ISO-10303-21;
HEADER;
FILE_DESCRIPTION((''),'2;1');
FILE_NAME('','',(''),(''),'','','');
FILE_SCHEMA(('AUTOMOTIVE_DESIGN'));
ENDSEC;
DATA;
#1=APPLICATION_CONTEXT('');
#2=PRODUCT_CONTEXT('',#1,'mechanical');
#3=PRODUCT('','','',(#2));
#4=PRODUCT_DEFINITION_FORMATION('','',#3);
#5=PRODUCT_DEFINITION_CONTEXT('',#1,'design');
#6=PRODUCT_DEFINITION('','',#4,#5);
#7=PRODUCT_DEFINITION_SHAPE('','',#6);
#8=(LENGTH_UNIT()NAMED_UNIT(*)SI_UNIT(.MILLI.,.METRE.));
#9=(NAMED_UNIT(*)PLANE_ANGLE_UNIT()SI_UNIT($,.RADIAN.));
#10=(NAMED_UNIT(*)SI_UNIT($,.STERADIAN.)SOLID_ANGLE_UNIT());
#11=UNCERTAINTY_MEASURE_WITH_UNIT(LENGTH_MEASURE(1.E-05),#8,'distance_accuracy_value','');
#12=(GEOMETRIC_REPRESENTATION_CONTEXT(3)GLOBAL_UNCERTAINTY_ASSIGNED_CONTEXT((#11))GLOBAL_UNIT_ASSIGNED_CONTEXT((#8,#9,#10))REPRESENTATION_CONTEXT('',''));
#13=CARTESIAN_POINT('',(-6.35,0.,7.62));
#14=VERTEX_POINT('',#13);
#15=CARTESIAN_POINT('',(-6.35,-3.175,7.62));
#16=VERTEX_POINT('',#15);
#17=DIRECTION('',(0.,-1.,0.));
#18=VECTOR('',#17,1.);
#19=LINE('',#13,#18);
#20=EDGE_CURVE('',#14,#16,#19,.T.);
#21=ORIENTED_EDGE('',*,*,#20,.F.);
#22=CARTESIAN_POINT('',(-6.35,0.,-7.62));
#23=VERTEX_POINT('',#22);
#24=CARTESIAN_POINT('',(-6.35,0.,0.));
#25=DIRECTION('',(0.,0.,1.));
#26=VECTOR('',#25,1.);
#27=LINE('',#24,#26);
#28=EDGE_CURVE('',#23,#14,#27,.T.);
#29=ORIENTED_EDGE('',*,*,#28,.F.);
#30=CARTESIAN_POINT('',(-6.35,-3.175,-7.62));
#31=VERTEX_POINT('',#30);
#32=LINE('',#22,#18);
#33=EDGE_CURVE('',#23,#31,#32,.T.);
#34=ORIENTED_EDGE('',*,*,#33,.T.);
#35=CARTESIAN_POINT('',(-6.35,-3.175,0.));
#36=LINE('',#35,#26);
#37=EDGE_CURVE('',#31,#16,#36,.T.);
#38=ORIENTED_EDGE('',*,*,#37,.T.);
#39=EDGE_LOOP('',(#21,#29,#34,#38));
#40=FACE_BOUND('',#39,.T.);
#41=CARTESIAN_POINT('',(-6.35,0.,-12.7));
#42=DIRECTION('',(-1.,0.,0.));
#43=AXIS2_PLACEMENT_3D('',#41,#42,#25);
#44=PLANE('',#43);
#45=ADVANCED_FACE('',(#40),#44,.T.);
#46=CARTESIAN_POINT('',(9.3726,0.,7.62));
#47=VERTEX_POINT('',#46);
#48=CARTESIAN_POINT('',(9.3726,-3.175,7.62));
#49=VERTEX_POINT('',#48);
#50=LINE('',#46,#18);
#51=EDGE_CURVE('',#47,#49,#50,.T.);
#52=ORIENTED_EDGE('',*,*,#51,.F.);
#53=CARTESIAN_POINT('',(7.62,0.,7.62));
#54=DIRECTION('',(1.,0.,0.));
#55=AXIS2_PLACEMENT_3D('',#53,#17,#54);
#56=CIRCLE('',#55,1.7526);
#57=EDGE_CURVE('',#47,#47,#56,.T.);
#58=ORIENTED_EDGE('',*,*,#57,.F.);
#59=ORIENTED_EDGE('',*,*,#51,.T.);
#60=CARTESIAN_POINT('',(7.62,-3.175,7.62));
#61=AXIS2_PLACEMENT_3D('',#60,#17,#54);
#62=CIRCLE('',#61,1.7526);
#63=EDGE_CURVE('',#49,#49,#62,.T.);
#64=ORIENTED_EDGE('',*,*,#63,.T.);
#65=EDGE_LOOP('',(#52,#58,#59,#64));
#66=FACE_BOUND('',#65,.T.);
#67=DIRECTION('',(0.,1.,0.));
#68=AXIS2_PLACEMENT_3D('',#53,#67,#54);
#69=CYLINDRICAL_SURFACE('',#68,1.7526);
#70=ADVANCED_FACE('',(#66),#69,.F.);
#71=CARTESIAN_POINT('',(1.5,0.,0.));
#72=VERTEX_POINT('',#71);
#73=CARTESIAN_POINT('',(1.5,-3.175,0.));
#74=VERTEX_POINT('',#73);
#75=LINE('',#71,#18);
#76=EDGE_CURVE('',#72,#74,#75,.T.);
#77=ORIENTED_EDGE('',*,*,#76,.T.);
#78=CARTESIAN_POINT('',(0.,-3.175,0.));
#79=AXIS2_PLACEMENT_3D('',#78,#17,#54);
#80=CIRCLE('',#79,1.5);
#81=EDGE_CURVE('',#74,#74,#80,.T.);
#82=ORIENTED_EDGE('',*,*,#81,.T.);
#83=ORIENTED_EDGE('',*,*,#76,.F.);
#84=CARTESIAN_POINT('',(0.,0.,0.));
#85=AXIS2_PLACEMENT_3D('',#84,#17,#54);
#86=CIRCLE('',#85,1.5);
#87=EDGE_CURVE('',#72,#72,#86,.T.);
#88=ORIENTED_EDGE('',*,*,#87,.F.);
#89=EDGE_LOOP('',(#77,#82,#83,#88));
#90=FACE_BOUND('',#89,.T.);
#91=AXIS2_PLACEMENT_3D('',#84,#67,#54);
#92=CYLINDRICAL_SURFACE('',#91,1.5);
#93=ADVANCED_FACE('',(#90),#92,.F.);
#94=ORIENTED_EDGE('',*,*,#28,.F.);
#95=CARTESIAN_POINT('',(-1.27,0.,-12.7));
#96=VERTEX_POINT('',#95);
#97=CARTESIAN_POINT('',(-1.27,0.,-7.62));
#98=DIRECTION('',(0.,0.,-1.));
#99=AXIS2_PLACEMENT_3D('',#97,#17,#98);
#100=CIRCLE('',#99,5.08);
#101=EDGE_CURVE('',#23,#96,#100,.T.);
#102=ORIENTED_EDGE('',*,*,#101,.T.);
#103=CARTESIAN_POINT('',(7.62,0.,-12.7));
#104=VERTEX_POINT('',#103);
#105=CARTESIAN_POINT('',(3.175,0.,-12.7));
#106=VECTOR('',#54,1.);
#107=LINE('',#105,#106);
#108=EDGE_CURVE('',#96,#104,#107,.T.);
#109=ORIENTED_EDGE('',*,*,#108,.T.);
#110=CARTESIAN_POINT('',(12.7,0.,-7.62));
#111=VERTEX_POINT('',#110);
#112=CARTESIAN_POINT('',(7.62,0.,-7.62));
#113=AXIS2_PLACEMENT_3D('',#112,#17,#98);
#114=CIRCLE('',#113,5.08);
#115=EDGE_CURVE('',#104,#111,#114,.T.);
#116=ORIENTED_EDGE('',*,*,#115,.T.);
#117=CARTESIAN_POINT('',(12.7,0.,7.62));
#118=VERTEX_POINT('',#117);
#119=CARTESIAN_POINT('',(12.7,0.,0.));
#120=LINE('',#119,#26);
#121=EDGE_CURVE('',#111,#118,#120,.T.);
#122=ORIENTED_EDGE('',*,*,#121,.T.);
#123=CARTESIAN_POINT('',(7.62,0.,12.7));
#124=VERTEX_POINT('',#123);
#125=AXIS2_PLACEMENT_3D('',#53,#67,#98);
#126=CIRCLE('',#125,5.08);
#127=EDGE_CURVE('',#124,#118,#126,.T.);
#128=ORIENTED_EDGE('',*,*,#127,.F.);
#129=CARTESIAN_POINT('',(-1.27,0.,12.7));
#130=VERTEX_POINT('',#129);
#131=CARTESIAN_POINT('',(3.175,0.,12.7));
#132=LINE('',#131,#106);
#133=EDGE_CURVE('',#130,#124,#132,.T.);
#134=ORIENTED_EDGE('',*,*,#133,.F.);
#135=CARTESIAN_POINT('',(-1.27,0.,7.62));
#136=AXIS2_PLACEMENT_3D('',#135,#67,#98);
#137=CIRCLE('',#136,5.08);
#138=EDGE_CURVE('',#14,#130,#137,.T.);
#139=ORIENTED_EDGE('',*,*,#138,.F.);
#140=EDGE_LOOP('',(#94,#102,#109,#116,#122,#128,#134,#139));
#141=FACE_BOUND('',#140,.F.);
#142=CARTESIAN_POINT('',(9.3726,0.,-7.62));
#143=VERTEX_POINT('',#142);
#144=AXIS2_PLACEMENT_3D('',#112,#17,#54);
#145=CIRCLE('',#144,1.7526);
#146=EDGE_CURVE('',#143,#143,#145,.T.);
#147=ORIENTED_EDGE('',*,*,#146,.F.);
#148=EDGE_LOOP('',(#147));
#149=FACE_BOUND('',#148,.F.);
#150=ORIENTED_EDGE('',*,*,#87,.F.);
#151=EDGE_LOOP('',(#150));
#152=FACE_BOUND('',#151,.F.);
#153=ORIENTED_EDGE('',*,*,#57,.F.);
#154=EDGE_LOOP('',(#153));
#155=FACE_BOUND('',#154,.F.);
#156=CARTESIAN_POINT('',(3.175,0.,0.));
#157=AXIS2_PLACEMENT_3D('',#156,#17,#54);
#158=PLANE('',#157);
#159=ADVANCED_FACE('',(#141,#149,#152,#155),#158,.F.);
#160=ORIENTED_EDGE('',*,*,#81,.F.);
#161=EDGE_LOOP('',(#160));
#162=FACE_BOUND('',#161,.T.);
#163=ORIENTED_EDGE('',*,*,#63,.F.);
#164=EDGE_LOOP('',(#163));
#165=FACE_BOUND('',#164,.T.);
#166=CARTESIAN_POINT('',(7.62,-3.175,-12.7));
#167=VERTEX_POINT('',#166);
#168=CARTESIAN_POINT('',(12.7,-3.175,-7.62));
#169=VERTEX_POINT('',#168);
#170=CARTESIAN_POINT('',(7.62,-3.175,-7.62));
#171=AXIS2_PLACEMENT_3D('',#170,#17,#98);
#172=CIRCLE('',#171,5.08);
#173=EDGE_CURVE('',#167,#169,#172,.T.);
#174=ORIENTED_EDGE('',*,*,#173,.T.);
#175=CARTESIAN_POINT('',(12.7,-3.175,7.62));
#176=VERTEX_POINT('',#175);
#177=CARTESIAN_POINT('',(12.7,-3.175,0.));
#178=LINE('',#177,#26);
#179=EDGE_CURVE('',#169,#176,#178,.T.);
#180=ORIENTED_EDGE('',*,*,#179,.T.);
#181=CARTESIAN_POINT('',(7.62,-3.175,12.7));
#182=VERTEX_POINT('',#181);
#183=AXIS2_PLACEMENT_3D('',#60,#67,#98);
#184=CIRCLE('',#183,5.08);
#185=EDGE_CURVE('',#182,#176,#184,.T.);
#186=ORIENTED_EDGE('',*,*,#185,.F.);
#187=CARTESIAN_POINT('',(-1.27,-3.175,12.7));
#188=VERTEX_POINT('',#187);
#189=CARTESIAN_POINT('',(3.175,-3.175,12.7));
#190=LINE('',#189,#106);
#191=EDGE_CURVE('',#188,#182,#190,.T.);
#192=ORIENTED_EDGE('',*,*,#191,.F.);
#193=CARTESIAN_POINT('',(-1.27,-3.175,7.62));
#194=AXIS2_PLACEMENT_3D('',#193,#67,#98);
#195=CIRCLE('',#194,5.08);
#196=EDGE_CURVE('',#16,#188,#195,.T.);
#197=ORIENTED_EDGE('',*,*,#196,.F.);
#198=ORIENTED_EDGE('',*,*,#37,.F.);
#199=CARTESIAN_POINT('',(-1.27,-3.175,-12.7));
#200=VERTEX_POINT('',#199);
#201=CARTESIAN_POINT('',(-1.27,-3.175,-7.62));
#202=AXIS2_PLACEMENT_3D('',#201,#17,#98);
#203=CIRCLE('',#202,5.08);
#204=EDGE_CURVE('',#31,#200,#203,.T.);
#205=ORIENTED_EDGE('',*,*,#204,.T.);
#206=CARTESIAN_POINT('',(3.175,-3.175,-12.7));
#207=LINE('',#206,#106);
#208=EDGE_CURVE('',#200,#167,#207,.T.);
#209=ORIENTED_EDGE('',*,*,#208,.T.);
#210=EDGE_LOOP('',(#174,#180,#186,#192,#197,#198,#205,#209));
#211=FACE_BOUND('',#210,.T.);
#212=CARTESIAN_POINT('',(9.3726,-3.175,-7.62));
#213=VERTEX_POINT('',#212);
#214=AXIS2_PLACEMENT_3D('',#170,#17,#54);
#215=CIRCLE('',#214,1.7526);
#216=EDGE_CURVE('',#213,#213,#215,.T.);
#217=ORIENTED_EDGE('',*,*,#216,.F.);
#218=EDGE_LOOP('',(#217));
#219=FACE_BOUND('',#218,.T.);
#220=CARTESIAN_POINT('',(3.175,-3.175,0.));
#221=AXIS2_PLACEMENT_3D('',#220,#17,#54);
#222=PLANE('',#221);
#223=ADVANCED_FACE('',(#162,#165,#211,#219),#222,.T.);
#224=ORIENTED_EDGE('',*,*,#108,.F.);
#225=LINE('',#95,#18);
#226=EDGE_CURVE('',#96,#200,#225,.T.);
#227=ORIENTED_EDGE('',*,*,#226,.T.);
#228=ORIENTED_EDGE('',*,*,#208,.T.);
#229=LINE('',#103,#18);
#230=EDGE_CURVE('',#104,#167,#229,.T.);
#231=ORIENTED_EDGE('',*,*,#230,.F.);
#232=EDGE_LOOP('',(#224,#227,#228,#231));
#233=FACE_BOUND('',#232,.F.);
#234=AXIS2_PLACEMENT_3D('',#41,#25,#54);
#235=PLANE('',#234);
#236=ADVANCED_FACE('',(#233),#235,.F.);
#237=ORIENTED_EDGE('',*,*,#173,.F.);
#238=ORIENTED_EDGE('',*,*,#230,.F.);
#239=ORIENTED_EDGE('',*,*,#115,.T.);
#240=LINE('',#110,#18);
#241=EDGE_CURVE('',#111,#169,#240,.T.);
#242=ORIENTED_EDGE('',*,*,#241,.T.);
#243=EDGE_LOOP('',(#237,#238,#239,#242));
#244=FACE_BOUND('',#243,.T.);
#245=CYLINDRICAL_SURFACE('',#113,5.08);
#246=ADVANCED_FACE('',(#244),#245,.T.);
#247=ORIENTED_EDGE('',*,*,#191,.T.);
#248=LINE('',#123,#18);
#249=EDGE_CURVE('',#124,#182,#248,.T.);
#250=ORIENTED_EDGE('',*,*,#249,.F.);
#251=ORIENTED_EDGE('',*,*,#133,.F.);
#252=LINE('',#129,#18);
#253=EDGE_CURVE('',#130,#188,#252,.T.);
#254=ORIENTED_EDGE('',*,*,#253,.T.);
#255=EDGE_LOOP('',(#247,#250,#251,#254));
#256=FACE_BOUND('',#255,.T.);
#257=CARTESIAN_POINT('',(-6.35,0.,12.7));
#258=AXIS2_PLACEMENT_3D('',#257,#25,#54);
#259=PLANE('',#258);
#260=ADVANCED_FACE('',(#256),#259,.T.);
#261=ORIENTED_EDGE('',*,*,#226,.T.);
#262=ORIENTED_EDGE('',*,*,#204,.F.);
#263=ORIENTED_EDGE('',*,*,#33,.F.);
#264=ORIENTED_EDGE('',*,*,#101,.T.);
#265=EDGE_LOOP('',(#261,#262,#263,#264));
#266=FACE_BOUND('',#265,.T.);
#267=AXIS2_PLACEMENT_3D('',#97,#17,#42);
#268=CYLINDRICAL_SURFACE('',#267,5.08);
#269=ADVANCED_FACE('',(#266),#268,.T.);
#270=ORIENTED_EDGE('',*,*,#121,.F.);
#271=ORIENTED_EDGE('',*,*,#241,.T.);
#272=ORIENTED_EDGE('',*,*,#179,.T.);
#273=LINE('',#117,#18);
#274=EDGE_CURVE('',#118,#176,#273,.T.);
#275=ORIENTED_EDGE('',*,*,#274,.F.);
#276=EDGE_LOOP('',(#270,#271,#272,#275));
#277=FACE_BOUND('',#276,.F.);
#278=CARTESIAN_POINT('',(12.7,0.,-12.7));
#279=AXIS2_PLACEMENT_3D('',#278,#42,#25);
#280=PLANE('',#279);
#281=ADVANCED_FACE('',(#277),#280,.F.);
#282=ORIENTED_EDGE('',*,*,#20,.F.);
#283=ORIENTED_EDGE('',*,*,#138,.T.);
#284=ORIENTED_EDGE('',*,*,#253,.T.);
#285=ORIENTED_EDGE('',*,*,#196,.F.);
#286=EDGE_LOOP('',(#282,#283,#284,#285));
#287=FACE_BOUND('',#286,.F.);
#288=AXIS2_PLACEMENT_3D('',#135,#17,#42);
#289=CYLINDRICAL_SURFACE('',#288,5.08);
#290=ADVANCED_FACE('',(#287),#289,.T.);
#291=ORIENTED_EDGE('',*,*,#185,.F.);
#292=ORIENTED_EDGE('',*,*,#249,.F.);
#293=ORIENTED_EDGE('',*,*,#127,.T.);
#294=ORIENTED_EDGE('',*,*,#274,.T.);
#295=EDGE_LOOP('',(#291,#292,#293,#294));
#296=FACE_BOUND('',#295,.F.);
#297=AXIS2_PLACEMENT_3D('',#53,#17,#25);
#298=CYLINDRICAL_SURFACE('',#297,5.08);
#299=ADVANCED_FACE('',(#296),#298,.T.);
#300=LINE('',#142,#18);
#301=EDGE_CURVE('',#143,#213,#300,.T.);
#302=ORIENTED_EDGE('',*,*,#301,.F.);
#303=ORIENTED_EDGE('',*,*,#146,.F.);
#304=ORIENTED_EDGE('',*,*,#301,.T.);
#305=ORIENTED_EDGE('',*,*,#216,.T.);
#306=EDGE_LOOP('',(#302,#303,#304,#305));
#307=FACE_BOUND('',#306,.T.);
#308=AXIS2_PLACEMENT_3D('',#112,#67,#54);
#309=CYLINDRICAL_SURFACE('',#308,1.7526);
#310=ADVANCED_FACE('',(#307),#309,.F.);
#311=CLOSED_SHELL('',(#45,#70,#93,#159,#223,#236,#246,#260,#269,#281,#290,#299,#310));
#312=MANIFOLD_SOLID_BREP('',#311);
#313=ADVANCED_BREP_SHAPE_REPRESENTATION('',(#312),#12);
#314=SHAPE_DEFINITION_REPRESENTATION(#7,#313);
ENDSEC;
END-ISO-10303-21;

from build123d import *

# Parameters (mm, degrees)
F0_W     = 19.05
F0_H     = 25.4
F0_R     = 1.5
F0_R_2   = 1.7526
F1_DEPTH = 3.175
F2_R     = 5.08


with BuildPart() as f1:
    # F0 (on Front) → F1 (new body)
    with BuildSketch(Plane.XZ):
        with Locations((3.175, 0)):
            Rectangle(F0_W, F0_H)
        Circle(F0_R, mode=Mode.SUBTRACT)
        with Locations((7.62, -7.62)):
            Circle(F0_R_2, mode=Mode.SUBTRACT)
        with Locations((7.62, 7.62)):
            Circle(F0_R_2, mode=Mode.SUBTRACT)
    extrude(amount=F1_DEPTH)

    # F2
    f2_edges = [f1.edges().sort_by_distance(p)[0] for p in [
        (12.7, -1.5875, 12.7),
        (12.7, -1.5875, -12.7),
        (-6.35, -1.5875, 12.7),
        (-6.35, -1.5875, -12.7),
    ]]
    fillet(f2_edges, radius=F2_R)


solid = f1.part
